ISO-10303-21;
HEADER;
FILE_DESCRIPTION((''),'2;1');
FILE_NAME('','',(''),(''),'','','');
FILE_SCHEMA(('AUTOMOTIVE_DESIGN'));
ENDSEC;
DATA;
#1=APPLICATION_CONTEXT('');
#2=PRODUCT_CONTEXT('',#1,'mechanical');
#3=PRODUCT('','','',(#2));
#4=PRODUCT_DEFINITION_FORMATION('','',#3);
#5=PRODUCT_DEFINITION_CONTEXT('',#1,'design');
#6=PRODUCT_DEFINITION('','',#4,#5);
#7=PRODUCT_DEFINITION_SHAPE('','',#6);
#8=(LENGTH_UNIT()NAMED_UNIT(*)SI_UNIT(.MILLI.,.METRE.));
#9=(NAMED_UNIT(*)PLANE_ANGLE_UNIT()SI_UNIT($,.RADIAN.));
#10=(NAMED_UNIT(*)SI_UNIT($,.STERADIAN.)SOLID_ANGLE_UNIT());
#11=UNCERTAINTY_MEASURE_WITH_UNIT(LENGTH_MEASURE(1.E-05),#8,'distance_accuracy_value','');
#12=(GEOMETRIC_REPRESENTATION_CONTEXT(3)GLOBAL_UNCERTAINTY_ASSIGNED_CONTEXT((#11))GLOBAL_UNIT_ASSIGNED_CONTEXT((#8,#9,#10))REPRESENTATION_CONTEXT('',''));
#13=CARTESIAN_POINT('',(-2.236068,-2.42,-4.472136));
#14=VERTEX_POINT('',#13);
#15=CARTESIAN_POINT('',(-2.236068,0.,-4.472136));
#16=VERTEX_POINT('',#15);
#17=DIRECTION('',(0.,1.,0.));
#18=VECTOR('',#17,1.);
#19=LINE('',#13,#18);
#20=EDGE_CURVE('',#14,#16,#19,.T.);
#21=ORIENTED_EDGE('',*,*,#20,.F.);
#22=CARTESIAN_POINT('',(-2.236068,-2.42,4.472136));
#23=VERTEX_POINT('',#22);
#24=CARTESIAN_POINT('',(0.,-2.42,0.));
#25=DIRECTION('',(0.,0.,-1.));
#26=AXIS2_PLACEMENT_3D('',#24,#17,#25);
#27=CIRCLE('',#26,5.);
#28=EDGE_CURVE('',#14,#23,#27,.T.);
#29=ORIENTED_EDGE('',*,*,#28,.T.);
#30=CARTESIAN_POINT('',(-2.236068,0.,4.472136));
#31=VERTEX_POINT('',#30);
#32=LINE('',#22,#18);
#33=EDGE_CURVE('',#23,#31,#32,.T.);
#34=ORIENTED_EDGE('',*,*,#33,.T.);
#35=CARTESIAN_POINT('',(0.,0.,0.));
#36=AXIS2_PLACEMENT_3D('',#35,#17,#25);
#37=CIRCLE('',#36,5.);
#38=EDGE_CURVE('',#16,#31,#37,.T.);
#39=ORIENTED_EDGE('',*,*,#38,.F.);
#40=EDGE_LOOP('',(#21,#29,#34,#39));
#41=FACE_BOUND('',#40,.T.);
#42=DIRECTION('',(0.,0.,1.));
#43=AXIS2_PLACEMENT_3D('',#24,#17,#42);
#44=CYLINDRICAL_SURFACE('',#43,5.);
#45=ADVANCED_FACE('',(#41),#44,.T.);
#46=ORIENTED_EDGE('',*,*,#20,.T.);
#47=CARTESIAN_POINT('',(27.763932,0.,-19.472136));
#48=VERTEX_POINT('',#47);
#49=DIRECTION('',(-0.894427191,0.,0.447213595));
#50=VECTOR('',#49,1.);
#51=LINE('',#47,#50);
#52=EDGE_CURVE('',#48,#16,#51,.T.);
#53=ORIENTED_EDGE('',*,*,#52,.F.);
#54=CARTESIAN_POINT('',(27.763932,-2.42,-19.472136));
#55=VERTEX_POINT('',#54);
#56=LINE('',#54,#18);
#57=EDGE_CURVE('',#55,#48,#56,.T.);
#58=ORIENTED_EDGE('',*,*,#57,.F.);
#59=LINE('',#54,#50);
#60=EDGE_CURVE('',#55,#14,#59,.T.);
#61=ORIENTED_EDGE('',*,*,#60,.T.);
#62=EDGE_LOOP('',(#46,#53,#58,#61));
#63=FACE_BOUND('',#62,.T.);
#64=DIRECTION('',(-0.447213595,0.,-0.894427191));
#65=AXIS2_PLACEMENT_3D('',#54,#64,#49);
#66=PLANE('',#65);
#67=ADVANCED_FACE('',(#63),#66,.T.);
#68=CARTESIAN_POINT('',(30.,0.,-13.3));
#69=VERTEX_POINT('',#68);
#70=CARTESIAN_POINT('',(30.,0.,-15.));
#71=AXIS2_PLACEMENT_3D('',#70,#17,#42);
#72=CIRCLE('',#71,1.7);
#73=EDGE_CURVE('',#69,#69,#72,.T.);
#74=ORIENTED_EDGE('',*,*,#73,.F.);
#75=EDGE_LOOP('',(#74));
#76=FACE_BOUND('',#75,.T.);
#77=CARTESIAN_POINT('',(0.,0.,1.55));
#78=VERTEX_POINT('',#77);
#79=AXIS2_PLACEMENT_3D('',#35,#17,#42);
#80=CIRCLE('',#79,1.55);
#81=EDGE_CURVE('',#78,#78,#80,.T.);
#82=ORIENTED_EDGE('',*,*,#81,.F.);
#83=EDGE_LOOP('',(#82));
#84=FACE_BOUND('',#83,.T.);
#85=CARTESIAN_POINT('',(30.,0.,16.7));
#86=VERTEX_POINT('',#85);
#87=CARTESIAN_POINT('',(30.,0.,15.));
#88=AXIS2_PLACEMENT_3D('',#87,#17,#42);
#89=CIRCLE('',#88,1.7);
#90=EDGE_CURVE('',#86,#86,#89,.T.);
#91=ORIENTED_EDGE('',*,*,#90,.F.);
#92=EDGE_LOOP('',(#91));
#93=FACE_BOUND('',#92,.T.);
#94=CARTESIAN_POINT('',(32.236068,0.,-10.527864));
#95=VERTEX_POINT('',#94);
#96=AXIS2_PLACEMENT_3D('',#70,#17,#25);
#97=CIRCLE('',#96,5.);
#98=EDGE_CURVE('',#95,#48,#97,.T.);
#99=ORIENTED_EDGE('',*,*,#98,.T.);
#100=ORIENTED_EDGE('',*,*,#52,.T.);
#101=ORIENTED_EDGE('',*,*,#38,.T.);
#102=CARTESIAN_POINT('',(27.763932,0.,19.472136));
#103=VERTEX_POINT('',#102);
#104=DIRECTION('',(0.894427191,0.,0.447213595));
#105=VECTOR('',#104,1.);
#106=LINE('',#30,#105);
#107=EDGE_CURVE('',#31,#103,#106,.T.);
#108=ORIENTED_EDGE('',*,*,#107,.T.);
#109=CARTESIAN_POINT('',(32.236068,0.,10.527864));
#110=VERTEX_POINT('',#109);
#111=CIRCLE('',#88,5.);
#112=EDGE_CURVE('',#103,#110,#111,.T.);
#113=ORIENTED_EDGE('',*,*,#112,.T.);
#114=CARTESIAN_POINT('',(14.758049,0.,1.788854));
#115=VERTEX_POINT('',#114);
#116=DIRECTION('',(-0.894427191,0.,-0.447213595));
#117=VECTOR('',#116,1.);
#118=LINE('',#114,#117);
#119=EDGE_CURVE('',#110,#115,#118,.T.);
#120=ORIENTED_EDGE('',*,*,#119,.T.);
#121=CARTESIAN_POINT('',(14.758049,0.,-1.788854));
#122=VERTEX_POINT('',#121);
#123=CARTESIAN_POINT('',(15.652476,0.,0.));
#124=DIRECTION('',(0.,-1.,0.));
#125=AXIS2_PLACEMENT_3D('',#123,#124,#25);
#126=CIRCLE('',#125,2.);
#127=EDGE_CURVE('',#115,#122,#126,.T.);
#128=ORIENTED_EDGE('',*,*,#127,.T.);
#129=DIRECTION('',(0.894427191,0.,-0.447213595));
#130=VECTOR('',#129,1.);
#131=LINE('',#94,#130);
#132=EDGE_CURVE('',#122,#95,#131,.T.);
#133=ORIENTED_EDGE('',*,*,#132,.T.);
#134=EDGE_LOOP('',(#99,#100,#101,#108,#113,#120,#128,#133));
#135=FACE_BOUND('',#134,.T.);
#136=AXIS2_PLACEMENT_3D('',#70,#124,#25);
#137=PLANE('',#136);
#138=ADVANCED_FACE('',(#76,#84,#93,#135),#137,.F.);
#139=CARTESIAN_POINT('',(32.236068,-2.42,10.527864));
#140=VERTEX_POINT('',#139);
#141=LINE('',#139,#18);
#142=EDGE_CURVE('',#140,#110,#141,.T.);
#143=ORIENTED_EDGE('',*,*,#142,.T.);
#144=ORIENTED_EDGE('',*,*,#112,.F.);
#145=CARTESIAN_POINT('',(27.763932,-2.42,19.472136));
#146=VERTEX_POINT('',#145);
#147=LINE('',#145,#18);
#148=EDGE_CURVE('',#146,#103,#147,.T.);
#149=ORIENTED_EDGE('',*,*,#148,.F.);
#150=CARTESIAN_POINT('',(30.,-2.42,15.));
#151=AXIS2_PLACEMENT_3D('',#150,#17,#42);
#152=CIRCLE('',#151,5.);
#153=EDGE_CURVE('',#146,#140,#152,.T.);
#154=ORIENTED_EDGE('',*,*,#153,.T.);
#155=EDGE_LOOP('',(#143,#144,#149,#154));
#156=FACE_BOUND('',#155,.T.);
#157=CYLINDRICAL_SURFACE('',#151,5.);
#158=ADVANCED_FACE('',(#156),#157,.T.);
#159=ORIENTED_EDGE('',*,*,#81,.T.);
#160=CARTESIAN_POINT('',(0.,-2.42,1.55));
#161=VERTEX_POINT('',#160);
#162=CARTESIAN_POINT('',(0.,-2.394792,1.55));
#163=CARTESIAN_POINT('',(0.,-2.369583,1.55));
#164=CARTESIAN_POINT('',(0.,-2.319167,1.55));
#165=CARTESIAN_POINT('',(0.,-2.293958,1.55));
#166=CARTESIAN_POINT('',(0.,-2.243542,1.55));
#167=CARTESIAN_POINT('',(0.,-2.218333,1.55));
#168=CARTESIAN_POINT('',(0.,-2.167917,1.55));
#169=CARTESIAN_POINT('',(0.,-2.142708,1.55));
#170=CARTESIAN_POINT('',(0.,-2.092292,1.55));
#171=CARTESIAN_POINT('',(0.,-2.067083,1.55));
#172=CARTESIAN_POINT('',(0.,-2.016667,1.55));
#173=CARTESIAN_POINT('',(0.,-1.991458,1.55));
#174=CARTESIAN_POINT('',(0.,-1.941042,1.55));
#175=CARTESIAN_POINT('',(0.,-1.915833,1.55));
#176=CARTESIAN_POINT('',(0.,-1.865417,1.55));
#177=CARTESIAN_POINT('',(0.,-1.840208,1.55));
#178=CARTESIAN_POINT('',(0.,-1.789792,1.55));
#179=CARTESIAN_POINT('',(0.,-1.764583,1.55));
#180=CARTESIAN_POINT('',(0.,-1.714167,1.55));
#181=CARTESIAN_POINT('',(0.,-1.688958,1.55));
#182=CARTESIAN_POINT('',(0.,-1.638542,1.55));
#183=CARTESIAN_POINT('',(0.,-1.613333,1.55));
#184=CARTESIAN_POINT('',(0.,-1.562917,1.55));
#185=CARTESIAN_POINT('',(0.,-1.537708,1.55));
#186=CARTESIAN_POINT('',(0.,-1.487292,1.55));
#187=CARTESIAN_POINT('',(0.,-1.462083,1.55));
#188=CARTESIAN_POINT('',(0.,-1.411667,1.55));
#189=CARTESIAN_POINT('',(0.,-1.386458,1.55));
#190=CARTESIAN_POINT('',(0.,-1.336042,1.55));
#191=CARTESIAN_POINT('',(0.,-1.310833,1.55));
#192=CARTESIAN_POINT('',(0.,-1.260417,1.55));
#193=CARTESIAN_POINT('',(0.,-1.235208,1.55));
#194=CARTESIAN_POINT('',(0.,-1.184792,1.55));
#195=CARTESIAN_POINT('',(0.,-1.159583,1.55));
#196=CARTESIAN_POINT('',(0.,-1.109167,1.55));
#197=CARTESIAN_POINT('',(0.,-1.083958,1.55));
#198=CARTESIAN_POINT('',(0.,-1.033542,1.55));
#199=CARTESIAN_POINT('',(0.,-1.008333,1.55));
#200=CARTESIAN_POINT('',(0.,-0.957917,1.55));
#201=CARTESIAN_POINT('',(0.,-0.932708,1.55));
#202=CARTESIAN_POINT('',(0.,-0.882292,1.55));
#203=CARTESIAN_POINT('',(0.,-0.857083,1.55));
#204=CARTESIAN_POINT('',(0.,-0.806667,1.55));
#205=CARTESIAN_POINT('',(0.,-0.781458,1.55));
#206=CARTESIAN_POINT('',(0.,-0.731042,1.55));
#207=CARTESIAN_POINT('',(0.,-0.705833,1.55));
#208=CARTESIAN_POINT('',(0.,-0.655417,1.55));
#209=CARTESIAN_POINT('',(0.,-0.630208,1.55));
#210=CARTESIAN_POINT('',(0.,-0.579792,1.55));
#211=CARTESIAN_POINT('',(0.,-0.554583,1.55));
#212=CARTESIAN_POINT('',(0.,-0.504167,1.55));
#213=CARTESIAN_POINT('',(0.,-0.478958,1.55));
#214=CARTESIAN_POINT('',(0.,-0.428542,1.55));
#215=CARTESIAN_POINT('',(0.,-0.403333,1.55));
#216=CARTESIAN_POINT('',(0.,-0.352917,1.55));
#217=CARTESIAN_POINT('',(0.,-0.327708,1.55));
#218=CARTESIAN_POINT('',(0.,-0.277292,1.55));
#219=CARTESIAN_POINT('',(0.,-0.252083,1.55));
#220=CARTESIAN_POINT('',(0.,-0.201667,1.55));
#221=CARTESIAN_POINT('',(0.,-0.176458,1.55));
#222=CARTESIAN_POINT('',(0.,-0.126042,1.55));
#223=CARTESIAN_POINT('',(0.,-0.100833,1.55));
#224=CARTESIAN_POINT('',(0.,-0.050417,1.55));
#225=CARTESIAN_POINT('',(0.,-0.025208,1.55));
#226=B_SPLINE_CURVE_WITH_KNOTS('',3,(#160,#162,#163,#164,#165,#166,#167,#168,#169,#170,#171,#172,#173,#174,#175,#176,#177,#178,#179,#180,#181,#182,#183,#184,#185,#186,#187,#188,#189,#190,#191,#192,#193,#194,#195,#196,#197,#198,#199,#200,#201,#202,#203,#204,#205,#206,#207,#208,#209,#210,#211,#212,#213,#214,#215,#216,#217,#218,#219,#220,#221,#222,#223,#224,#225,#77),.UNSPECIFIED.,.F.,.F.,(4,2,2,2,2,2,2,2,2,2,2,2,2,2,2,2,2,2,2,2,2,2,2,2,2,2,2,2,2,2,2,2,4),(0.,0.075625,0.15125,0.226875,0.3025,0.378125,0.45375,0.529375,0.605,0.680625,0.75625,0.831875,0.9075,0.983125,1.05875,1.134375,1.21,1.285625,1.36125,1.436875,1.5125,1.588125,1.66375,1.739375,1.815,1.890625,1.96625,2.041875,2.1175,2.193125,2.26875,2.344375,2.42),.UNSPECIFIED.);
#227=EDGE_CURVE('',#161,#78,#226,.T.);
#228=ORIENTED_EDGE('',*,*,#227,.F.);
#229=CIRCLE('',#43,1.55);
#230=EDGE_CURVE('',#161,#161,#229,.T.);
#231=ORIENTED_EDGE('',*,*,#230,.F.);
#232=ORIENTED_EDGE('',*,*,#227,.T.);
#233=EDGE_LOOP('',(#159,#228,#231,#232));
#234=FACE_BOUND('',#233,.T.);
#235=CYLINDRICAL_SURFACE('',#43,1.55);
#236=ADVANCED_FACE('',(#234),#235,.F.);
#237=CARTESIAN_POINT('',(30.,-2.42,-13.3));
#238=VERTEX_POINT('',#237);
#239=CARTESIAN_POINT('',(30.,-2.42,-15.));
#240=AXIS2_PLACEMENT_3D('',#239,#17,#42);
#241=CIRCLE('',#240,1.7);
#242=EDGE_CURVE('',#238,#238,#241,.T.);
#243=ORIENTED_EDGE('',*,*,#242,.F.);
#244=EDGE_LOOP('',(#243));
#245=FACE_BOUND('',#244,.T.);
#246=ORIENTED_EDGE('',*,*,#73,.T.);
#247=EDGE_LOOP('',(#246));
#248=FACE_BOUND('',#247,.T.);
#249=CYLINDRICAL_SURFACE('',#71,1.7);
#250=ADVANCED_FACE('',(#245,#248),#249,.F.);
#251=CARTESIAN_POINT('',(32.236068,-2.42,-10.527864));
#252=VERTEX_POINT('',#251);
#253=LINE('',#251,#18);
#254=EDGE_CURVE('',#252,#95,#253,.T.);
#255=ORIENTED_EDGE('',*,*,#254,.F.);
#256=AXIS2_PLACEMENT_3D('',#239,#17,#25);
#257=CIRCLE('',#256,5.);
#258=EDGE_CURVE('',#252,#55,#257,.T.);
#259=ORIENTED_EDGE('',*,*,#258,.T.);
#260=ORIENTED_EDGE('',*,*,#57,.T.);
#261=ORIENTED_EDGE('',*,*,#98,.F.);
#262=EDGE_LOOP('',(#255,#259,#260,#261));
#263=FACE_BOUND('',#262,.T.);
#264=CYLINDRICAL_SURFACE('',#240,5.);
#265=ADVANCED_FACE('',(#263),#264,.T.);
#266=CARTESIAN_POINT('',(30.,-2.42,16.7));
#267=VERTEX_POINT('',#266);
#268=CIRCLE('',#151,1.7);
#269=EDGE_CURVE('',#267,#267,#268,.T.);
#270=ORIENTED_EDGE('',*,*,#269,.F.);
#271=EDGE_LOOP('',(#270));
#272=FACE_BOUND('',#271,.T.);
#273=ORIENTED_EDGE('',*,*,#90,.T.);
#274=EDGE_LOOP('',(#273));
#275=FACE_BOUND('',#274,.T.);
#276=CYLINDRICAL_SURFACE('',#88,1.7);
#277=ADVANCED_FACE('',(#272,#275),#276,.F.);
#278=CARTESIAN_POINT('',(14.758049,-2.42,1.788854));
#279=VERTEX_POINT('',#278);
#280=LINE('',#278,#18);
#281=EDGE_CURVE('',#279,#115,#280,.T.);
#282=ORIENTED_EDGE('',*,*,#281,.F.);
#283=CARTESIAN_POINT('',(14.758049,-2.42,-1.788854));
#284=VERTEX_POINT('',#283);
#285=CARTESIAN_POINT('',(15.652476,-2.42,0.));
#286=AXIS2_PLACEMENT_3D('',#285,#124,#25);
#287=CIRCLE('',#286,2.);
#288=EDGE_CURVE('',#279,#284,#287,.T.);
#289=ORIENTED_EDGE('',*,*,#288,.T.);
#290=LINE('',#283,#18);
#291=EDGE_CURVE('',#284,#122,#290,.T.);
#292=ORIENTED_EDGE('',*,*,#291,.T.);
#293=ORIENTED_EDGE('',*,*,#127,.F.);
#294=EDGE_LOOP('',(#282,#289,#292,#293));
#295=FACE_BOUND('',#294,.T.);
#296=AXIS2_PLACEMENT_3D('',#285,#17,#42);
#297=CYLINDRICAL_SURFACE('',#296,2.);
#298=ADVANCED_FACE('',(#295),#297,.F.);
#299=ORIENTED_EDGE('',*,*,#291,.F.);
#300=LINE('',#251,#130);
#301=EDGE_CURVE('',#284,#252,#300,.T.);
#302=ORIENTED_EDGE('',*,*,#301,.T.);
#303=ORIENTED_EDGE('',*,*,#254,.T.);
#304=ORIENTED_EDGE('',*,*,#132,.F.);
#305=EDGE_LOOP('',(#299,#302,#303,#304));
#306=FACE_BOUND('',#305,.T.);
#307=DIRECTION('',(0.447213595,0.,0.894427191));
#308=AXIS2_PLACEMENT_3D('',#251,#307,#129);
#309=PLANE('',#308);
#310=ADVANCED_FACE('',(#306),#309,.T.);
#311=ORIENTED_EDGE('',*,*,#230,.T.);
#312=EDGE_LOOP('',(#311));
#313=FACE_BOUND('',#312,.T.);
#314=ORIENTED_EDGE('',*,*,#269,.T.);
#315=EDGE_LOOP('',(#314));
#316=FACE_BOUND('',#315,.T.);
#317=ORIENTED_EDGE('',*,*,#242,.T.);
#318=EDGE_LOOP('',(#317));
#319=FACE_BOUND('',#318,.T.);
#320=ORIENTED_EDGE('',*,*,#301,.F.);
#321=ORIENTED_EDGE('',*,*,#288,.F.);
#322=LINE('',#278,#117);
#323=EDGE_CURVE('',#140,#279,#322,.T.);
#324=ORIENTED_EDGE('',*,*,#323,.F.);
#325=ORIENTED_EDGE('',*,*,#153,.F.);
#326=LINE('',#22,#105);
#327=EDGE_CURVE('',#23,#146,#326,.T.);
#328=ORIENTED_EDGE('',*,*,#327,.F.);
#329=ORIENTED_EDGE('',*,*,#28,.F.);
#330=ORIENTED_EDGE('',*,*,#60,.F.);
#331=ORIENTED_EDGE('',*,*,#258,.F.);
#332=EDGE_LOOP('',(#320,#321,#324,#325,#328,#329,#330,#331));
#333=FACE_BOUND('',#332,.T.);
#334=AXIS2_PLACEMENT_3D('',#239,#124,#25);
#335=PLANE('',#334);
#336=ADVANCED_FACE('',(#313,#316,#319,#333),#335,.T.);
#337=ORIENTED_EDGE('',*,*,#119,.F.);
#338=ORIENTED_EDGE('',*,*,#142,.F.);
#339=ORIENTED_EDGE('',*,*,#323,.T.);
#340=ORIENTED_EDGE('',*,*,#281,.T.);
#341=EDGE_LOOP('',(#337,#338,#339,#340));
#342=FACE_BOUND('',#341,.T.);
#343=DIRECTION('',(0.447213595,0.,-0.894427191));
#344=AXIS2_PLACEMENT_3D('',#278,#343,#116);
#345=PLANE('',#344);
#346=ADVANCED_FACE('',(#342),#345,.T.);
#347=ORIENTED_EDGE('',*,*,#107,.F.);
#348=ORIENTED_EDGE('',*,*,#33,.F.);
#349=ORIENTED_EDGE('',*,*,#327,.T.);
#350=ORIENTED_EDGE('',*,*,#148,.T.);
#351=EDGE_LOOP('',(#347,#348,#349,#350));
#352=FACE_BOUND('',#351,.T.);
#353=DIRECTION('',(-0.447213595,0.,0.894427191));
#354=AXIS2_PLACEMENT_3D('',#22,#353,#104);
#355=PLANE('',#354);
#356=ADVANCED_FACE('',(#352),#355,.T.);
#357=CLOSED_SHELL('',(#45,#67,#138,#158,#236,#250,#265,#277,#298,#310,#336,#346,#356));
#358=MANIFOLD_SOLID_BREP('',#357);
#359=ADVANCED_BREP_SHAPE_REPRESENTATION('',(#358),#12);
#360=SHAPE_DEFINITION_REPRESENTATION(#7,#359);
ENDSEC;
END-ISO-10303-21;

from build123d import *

# Parameters (mm, degrees)
SKETCH8_R            = 1.55
BASE_FLANGE2_DEPTH   = 2.42
M3_CLEARANCE_HOLE3_D = 3.4


# Sheet-metal steps are written as plain solids
with BuildPart() as part:
    # Sketch8 → Base-Flange2 (new body)
    with BuildSketch(Plane(origin=(0, 0, 0), x_dir=(1, 0, 0), z_dir=(0, 1, 0))):
        with BuildLine():
            Line((27.763932023, 19.472135955), (-2.236067977, 4.472135955))
            ThreePointArc((-2.236067977, 4.472135955), (-5, 0), (-2.236067977, -4.472135955))
            Line((-2.236067977, -4.472135955), (27.763932023, -19.472135955))
            ThreePointArc((27.763932023, -19.472135955), (34.472135955, -17.236067977), (32.236067977, -10.527864045))
            Line((32.236067977, -10.527864045), (14.758048651, -1.788854382))
            ThreePointArc((14.758048651, -1.788854382), (13.652475842, 0), (14.758048651, 1.788854382))
            Line((14.758048651, 1.788854382), (32.236067977, 10.527864045))
            ThreePointArc((32.236067977, 10.527864045), (34.472135955, 17.236067977), (27.763932023, 19.472135955))
        make_face()
        with Locations(Location((0, 0, 0), (0, 0, 270))):
            Circle(SKETCH8_R, mode=Mode.SUBTRACT)
    extrude(amount=-BASE_FLANGE2_DEPTH)

    # M3 Clearance Hole3 (through all)
    with Locations(Plane(origin=(0, 0, 0), x_dir=(1, 0, 0), z_dir=(0, 1, 0))):
        with Locations((30, 15), (30, -15)):
            Hole(M3_CLEARANCE_HOLE3_D / 2)


solid = part.part
